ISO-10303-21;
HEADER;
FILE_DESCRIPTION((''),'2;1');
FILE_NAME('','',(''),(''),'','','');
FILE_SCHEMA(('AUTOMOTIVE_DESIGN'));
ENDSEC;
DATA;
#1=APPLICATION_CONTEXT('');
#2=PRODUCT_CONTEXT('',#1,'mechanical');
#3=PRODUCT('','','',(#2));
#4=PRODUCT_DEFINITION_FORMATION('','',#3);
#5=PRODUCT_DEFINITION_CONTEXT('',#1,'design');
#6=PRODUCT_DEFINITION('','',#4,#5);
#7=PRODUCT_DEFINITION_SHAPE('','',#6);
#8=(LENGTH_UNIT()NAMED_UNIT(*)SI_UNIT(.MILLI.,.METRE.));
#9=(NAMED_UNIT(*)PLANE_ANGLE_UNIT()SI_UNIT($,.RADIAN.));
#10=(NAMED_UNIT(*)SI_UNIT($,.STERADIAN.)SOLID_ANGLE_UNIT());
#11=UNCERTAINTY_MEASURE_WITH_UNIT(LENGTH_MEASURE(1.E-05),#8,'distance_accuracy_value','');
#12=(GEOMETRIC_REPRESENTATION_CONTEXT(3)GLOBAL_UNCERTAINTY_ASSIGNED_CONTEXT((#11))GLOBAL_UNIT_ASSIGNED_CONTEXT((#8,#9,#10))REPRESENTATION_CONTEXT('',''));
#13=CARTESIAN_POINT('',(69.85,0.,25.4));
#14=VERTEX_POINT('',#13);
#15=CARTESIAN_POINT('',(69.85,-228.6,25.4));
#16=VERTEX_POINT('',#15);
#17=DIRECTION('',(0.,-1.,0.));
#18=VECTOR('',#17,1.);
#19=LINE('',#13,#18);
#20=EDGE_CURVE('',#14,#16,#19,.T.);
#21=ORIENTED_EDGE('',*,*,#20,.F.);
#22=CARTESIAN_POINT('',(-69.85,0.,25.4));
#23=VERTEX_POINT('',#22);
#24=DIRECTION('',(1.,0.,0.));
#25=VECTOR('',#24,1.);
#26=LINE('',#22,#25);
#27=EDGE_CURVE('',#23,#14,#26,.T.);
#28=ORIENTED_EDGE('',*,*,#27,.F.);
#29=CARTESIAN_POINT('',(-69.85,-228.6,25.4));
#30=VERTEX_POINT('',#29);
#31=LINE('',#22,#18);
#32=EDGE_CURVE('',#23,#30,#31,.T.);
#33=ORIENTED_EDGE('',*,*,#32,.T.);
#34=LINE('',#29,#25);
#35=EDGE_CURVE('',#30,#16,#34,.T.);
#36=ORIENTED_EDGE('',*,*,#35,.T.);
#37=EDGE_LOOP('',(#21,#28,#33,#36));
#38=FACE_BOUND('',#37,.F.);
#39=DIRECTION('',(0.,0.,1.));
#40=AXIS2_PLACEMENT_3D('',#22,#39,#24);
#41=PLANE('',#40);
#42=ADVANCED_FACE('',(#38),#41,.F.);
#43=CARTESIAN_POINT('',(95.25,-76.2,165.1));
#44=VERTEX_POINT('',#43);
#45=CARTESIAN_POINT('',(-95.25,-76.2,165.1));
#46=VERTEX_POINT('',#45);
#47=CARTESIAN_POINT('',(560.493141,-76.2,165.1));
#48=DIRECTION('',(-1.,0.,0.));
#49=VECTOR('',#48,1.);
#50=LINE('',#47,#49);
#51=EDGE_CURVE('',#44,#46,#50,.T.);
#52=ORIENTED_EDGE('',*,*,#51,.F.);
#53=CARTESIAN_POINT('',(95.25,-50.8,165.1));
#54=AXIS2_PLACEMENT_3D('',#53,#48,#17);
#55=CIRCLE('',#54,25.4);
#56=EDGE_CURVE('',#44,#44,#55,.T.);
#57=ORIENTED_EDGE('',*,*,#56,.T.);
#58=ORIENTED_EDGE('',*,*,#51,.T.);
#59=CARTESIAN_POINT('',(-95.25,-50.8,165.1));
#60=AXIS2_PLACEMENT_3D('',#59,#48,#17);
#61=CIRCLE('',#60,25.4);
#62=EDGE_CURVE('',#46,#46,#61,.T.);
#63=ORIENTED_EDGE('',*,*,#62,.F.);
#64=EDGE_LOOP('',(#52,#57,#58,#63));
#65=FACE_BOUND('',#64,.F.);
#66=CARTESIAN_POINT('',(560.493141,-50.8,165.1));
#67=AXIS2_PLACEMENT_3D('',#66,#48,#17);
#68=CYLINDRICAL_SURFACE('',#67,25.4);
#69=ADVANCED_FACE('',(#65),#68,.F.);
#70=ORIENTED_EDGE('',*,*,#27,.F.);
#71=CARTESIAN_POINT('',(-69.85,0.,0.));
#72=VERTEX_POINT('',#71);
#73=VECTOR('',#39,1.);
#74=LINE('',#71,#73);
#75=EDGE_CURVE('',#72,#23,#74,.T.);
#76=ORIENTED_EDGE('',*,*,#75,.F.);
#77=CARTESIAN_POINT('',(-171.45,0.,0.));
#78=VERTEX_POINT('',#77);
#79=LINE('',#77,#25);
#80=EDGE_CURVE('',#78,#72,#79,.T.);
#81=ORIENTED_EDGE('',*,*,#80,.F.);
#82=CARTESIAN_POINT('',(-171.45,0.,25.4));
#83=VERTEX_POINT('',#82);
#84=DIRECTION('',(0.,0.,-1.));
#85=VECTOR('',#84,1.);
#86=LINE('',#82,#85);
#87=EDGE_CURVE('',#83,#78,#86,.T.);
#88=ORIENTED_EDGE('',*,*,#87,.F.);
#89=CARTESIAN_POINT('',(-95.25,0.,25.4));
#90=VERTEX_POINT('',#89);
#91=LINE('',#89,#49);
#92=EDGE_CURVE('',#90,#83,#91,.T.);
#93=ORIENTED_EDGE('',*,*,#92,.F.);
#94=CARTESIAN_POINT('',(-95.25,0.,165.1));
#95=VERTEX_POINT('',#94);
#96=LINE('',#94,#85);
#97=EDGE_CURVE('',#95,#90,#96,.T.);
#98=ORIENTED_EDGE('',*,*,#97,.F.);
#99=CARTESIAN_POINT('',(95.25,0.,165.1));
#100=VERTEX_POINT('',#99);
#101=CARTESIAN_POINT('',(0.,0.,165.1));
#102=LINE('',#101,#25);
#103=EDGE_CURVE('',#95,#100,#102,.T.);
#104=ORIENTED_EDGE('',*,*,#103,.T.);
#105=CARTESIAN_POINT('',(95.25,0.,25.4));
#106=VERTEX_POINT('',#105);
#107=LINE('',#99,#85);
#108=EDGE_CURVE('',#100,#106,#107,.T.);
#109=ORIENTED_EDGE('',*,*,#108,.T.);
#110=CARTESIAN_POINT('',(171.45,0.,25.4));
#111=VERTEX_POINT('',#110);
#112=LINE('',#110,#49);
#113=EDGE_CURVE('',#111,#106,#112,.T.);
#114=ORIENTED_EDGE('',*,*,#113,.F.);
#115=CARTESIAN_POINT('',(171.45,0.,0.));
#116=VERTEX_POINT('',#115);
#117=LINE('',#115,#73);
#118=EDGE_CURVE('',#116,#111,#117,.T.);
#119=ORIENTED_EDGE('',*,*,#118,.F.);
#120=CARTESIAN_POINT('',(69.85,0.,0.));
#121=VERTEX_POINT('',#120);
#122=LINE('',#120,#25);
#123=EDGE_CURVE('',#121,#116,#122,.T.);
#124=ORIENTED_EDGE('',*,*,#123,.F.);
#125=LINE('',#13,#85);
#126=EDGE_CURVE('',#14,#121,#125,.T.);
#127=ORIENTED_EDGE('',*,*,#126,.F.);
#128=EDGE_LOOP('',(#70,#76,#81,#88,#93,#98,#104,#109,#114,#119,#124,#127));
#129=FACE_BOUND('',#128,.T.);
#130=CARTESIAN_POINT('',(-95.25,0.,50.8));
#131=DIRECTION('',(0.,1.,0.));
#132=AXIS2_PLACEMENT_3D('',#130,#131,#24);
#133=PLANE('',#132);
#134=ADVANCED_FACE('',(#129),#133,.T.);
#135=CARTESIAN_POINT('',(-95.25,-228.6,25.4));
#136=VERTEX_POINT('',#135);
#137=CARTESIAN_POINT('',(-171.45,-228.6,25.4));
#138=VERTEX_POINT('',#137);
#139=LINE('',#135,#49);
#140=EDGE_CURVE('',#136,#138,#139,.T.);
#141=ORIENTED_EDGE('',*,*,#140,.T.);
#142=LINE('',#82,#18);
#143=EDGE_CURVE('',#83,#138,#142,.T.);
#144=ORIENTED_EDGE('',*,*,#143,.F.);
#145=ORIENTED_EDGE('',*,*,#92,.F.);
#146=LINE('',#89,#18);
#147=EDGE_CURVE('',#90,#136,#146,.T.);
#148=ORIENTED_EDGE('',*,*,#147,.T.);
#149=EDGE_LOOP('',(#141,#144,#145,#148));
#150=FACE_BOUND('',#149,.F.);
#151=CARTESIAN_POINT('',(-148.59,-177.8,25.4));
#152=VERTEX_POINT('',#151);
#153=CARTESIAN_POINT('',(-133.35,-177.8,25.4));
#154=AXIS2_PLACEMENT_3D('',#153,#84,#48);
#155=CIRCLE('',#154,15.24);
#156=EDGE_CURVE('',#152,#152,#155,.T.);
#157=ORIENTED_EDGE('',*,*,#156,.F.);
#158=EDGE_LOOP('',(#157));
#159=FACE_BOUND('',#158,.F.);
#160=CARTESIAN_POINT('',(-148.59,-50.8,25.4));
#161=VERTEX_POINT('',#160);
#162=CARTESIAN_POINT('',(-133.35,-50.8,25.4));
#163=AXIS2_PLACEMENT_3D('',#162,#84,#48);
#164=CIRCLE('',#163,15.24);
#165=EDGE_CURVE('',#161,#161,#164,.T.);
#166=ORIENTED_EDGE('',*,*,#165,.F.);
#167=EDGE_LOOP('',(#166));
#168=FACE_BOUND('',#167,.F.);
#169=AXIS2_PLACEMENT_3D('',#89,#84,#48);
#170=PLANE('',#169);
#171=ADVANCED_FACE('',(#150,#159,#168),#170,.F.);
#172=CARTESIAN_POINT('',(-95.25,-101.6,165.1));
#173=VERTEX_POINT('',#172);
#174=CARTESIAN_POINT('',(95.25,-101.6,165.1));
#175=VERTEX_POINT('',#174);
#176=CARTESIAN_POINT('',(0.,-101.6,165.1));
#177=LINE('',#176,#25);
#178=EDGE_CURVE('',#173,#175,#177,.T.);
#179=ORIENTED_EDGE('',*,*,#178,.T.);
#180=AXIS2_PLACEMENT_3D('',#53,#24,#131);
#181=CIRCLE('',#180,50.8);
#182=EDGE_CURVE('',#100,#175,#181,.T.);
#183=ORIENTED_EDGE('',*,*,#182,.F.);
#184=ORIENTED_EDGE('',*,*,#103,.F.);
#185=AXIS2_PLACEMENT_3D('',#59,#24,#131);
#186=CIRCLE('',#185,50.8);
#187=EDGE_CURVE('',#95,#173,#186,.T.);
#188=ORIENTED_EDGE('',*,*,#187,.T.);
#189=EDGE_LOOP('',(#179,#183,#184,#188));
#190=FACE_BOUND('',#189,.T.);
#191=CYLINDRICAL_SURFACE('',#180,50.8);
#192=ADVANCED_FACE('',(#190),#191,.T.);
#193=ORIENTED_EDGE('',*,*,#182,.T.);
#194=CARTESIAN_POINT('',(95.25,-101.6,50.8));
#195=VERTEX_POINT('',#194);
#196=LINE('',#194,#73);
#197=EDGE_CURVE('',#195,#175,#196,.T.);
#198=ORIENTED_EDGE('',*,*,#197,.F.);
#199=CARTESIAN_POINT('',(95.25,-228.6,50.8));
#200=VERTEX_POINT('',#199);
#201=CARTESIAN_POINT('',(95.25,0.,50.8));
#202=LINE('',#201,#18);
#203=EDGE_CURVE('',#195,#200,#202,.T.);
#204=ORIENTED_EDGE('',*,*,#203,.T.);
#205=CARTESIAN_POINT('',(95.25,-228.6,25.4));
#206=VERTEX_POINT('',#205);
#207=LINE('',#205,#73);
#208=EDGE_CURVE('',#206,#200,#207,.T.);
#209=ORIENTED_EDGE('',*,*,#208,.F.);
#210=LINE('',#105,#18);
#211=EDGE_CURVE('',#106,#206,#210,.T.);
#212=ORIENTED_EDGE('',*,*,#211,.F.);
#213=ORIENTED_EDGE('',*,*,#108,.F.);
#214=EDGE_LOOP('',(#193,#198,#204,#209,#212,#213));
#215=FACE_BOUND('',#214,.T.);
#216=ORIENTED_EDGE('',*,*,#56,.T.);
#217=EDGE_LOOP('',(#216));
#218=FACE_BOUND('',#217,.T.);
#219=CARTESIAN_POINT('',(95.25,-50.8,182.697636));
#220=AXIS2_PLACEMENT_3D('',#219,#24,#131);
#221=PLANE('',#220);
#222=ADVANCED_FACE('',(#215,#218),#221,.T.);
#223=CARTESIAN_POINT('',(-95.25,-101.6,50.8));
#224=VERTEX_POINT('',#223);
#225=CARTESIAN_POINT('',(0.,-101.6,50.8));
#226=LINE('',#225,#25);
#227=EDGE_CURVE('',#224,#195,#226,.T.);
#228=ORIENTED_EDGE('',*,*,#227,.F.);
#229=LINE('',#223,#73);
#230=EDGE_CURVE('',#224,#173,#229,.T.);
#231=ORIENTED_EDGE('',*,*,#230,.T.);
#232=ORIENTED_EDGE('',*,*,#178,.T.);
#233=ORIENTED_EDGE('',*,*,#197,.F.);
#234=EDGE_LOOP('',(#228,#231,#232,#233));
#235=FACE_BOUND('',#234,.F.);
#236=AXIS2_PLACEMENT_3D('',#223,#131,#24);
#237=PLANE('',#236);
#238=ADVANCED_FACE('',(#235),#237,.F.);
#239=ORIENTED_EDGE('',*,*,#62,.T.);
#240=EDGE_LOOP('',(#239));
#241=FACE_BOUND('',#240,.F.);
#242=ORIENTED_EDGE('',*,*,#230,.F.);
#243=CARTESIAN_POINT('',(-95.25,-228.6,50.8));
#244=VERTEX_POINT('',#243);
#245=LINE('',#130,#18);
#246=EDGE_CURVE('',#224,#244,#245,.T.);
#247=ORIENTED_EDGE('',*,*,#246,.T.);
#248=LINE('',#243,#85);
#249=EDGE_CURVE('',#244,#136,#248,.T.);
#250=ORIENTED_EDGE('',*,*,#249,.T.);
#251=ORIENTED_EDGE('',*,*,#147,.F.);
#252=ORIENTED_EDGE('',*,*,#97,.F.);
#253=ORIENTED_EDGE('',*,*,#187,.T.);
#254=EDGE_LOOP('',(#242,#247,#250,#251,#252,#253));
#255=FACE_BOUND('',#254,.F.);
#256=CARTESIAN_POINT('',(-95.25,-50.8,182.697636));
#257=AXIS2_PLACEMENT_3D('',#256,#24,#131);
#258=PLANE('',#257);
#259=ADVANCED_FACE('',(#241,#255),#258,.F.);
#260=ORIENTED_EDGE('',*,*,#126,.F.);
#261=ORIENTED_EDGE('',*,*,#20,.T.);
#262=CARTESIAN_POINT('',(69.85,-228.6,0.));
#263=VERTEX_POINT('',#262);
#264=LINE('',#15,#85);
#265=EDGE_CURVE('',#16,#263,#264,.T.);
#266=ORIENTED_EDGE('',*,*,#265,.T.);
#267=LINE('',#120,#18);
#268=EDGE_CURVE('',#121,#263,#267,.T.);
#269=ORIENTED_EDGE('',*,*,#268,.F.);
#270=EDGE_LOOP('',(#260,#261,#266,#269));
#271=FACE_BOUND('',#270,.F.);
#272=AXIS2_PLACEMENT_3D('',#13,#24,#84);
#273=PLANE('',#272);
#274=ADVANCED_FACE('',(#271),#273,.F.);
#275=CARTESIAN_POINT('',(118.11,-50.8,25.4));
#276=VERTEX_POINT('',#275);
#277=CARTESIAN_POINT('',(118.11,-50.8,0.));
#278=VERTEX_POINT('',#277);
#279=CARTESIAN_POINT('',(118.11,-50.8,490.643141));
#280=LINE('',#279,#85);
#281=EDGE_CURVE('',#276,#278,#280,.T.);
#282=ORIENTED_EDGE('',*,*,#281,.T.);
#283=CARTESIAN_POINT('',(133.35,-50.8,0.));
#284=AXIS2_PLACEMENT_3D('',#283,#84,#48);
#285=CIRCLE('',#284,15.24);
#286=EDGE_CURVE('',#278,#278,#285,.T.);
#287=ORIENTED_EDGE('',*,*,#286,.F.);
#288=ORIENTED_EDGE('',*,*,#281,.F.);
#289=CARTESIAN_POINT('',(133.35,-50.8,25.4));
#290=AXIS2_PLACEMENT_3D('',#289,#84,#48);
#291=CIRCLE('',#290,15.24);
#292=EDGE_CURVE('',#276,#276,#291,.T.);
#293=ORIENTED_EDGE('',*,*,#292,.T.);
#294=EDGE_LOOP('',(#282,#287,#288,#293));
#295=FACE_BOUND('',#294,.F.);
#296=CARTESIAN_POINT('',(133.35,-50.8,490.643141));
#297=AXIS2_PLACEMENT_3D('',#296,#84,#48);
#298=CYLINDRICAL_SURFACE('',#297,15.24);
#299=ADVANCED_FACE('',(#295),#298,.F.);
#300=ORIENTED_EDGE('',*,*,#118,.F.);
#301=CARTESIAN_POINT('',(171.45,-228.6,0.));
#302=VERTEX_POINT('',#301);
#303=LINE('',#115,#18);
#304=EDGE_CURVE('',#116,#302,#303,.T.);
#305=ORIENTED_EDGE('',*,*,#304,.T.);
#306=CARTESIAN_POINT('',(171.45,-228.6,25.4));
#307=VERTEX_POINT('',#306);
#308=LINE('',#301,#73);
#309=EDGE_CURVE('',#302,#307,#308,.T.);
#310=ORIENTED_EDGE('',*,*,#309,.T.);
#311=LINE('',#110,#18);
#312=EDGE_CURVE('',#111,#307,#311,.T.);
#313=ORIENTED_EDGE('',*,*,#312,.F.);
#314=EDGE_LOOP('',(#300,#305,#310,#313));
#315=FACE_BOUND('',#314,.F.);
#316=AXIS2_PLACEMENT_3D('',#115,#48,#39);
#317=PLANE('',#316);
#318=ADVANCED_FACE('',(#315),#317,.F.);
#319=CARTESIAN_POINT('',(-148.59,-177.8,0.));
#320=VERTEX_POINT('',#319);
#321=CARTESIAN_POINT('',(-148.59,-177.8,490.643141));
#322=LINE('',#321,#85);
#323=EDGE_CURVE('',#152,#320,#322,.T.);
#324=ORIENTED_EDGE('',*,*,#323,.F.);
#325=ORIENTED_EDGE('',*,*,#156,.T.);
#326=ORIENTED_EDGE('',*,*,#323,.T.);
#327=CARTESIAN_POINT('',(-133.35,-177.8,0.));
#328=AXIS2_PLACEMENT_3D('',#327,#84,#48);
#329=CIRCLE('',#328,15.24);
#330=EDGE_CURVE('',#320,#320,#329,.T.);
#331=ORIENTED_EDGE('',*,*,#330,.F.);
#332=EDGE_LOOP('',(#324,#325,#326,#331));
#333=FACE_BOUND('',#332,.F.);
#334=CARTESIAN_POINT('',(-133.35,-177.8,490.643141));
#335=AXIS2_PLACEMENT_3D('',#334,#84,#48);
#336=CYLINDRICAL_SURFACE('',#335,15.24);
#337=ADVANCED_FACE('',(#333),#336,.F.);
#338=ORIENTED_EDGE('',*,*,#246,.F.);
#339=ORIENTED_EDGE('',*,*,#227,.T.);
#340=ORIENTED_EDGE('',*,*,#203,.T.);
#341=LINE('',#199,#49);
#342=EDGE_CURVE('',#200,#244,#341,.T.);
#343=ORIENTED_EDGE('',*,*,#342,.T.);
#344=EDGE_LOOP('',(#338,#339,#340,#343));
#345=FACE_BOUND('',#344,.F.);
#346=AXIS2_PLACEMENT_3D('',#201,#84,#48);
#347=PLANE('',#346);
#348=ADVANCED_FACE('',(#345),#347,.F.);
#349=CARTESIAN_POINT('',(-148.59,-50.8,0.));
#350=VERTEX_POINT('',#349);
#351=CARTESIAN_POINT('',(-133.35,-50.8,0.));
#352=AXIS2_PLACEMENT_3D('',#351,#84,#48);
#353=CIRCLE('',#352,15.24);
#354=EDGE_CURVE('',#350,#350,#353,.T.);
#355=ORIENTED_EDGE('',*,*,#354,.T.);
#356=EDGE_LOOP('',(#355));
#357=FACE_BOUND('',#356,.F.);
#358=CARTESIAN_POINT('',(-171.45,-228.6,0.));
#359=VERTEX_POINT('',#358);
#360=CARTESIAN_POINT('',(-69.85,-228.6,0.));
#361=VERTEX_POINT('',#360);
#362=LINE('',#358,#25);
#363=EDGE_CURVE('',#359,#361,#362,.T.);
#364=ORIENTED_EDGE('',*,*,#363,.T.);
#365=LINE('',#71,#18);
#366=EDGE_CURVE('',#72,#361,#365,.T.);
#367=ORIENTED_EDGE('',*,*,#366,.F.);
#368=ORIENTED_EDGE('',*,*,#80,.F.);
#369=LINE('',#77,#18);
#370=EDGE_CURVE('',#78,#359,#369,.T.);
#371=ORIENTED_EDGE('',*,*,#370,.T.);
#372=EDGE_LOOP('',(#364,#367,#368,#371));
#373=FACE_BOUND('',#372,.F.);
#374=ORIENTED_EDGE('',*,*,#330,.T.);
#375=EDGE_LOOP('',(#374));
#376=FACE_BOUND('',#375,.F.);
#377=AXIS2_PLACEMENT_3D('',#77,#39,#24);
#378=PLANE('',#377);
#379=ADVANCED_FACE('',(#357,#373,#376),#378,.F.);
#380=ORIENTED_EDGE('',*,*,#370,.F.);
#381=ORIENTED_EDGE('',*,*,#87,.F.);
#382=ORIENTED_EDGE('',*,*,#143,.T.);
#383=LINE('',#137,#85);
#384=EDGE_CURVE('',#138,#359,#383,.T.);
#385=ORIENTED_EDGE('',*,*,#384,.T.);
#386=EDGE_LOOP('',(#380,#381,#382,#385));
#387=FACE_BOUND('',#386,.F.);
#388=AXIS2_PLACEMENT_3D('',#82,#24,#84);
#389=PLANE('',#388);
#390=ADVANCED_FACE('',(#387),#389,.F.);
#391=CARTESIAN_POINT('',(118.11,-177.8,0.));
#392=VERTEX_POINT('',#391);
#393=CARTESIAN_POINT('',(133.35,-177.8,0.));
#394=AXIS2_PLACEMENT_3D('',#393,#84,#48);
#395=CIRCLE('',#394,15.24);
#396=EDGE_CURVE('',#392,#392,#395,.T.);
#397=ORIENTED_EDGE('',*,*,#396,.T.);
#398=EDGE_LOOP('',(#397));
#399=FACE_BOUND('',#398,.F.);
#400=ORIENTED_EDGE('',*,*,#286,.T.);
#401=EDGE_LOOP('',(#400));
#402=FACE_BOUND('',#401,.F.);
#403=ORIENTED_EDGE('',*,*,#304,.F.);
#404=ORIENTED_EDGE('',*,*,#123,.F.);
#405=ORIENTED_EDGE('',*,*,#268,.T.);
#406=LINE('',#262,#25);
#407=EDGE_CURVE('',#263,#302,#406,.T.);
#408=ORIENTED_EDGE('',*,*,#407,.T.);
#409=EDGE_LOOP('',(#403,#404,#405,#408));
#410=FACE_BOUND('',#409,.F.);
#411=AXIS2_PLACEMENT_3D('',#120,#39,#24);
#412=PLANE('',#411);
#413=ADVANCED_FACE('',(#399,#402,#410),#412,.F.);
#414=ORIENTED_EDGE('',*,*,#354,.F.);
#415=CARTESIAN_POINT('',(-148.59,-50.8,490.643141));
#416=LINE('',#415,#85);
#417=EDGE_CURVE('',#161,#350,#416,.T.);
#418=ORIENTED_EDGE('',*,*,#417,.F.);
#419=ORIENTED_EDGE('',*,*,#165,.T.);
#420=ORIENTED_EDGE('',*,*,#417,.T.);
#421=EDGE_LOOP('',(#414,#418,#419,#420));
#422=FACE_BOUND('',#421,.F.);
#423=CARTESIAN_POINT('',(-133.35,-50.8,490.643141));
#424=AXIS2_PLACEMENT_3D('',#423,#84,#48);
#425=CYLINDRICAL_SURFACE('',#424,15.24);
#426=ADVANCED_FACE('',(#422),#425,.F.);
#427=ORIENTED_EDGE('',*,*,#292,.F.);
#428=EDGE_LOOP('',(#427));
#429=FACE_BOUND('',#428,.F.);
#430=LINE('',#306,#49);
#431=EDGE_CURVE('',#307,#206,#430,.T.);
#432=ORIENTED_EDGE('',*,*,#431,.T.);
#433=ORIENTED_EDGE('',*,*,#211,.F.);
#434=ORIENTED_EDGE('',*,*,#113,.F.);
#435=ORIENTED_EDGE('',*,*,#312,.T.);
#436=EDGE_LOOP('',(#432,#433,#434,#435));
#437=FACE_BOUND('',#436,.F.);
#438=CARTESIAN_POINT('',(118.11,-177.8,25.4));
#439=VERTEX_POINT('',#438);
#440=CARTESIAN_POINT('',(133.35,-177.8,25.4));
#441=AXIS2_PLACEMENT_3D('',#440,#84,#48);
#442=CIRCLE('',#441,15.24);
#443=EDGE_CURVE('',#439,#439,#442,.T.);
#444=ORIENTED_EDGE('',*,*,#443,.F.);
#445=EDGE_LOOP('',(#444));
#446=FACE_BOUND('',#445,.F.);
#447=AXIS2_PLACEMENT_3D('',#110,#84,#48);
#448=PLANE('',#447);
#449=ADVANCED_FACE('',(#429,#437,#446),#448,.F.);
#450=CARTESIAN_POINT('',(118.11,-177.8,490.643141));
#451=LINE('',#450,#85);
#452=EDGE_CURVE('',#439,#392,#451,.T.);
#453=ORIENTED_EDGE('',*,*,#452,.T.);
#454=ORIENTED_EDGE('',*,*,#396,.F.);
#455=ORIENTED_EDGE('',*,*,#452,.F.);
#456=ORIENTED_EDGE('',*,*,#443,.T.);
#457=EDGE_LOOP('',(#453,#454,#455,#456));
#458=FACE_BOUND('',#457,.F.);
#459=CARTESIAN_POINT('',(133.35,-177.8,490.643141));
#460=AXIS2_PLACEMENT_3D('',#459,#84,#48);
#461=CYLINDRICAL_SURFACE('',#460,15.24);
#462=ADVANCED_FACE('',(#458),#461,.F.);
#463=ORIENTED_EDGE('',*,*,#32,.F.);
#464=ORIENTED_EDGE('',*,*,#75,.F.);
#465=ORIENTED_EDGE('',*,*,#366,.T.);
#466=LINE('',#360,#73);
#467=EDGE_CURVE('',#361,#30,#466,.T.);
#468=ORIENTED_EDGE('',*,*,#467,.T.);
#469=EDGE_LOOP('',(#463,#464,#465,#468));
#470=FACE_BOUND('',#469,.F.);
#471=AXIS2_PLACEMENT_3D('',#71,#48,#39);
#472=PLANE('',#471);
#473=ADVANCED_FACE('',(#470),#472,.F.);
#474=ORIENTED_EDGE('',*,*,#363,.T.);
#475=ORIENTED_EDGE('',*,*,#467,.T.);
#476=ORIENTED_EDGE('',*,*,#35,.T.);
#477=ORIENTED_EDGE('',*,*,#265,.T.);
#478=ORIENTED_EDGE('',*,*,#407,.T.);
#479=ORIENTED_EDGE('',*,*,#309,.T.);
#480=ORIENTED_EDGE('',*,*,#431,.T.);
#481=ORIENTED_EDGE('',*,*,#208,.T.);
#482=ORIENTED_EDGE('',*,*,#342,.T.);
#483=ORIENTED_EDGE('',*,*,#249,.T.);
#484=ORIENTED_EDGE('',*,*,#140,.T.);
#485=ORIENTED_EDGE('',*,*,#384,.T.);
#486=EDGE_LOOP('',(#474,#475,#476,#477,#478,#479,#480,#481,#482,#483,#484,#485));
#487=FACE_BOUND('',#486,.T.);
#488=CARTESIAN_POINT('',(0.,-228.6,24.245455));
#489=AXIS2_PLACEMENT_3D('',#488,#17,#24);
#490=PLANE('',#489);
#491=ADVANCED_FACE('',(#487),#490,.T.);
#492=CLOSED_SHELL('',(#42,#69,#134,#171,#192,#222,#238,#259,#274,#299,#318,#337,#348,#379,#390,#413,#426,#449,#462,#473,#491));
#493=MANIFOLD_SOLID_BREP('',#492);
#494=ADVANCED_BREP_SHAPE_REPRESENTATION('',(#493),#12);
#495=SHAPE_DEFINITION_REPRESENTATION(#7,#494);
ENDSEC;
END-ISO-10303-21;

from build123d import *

# Parameters (mm, degrees)
F1_DEPTH = 228.6
F2_W     = 190.5
F2_H     = 101.6
F3_DEPTH = 114.3
F5_DEPTH = 190.5
F8_D     = 50.8
F10_D    = 30.48


with BuildPart() as f1:
    # F0 (on Front) → F1 (new body)
    with BuildSketch(Plane.XZ):
        Polygon((-69.85, 25.4), (0, 25.4), (69.85, 25.4), (69.85, 0), (171.45, 0), (171.45, 25.4), (95.25, 25.4), (95.25, 50.8), (0, 50.8), (-95.25, 50.8), (-95.25, 25.4), (-171.45, 25.4), (-171.45, 0), (-69.85, 0), align=None)
    extrude(amount=F1_DEPTH)

    # F2 (on face) → F3 (join)
    with BuildSketch(Plane.XY.offset(50.8)):
        with Locations((0, -50.8)):
            Rectangle(F2_W, F2_H)
    extrude(amount=F3_DEPTH)

    # F4 (on face) → F5 (join)
    with BuildSketch(Plane.YZ.offset(95.25)):
        with BuildLine():
            Line((-101.6, 165.1), (0, 165.1))
            ThreePointArc((0, 165.1), (-50.8, 215.9), (-101.6, 165.1))
        make_face()
        with BuildLine():
            Line((0, 25.4), (0, 165.1))
            ThreePointArc((0, 165.1), (-50.8, 114.3), (-101.6, 165.1))
            Line((-101.6, 165.1), (-101.6, 50.8))
            Line((-101.6, 50.8), (-228.6, 50.8))
            Line((-228.6, 50.8), (-228.6, 25.4))
            Line((-228.6, 25.4), (0, 25.4))
        make_face()
    extrude(amount=-F5_DEPTH)

    # F8 (through all)
    with Locations(Plane.YZ.offset(95.25)):
        with Locations((-50.8, 165.1)):
            Hole(F8_D / 2)

    # F10 (through all)
    with Locations(Plane.XY.offset(25.4)):
        with Locations((-133.35, -50.8), (133.35, -50.8), (-133.35, -177.8), (133.35, -177.8)):
            Hole(F10_D / 2)


solid = f1.part
